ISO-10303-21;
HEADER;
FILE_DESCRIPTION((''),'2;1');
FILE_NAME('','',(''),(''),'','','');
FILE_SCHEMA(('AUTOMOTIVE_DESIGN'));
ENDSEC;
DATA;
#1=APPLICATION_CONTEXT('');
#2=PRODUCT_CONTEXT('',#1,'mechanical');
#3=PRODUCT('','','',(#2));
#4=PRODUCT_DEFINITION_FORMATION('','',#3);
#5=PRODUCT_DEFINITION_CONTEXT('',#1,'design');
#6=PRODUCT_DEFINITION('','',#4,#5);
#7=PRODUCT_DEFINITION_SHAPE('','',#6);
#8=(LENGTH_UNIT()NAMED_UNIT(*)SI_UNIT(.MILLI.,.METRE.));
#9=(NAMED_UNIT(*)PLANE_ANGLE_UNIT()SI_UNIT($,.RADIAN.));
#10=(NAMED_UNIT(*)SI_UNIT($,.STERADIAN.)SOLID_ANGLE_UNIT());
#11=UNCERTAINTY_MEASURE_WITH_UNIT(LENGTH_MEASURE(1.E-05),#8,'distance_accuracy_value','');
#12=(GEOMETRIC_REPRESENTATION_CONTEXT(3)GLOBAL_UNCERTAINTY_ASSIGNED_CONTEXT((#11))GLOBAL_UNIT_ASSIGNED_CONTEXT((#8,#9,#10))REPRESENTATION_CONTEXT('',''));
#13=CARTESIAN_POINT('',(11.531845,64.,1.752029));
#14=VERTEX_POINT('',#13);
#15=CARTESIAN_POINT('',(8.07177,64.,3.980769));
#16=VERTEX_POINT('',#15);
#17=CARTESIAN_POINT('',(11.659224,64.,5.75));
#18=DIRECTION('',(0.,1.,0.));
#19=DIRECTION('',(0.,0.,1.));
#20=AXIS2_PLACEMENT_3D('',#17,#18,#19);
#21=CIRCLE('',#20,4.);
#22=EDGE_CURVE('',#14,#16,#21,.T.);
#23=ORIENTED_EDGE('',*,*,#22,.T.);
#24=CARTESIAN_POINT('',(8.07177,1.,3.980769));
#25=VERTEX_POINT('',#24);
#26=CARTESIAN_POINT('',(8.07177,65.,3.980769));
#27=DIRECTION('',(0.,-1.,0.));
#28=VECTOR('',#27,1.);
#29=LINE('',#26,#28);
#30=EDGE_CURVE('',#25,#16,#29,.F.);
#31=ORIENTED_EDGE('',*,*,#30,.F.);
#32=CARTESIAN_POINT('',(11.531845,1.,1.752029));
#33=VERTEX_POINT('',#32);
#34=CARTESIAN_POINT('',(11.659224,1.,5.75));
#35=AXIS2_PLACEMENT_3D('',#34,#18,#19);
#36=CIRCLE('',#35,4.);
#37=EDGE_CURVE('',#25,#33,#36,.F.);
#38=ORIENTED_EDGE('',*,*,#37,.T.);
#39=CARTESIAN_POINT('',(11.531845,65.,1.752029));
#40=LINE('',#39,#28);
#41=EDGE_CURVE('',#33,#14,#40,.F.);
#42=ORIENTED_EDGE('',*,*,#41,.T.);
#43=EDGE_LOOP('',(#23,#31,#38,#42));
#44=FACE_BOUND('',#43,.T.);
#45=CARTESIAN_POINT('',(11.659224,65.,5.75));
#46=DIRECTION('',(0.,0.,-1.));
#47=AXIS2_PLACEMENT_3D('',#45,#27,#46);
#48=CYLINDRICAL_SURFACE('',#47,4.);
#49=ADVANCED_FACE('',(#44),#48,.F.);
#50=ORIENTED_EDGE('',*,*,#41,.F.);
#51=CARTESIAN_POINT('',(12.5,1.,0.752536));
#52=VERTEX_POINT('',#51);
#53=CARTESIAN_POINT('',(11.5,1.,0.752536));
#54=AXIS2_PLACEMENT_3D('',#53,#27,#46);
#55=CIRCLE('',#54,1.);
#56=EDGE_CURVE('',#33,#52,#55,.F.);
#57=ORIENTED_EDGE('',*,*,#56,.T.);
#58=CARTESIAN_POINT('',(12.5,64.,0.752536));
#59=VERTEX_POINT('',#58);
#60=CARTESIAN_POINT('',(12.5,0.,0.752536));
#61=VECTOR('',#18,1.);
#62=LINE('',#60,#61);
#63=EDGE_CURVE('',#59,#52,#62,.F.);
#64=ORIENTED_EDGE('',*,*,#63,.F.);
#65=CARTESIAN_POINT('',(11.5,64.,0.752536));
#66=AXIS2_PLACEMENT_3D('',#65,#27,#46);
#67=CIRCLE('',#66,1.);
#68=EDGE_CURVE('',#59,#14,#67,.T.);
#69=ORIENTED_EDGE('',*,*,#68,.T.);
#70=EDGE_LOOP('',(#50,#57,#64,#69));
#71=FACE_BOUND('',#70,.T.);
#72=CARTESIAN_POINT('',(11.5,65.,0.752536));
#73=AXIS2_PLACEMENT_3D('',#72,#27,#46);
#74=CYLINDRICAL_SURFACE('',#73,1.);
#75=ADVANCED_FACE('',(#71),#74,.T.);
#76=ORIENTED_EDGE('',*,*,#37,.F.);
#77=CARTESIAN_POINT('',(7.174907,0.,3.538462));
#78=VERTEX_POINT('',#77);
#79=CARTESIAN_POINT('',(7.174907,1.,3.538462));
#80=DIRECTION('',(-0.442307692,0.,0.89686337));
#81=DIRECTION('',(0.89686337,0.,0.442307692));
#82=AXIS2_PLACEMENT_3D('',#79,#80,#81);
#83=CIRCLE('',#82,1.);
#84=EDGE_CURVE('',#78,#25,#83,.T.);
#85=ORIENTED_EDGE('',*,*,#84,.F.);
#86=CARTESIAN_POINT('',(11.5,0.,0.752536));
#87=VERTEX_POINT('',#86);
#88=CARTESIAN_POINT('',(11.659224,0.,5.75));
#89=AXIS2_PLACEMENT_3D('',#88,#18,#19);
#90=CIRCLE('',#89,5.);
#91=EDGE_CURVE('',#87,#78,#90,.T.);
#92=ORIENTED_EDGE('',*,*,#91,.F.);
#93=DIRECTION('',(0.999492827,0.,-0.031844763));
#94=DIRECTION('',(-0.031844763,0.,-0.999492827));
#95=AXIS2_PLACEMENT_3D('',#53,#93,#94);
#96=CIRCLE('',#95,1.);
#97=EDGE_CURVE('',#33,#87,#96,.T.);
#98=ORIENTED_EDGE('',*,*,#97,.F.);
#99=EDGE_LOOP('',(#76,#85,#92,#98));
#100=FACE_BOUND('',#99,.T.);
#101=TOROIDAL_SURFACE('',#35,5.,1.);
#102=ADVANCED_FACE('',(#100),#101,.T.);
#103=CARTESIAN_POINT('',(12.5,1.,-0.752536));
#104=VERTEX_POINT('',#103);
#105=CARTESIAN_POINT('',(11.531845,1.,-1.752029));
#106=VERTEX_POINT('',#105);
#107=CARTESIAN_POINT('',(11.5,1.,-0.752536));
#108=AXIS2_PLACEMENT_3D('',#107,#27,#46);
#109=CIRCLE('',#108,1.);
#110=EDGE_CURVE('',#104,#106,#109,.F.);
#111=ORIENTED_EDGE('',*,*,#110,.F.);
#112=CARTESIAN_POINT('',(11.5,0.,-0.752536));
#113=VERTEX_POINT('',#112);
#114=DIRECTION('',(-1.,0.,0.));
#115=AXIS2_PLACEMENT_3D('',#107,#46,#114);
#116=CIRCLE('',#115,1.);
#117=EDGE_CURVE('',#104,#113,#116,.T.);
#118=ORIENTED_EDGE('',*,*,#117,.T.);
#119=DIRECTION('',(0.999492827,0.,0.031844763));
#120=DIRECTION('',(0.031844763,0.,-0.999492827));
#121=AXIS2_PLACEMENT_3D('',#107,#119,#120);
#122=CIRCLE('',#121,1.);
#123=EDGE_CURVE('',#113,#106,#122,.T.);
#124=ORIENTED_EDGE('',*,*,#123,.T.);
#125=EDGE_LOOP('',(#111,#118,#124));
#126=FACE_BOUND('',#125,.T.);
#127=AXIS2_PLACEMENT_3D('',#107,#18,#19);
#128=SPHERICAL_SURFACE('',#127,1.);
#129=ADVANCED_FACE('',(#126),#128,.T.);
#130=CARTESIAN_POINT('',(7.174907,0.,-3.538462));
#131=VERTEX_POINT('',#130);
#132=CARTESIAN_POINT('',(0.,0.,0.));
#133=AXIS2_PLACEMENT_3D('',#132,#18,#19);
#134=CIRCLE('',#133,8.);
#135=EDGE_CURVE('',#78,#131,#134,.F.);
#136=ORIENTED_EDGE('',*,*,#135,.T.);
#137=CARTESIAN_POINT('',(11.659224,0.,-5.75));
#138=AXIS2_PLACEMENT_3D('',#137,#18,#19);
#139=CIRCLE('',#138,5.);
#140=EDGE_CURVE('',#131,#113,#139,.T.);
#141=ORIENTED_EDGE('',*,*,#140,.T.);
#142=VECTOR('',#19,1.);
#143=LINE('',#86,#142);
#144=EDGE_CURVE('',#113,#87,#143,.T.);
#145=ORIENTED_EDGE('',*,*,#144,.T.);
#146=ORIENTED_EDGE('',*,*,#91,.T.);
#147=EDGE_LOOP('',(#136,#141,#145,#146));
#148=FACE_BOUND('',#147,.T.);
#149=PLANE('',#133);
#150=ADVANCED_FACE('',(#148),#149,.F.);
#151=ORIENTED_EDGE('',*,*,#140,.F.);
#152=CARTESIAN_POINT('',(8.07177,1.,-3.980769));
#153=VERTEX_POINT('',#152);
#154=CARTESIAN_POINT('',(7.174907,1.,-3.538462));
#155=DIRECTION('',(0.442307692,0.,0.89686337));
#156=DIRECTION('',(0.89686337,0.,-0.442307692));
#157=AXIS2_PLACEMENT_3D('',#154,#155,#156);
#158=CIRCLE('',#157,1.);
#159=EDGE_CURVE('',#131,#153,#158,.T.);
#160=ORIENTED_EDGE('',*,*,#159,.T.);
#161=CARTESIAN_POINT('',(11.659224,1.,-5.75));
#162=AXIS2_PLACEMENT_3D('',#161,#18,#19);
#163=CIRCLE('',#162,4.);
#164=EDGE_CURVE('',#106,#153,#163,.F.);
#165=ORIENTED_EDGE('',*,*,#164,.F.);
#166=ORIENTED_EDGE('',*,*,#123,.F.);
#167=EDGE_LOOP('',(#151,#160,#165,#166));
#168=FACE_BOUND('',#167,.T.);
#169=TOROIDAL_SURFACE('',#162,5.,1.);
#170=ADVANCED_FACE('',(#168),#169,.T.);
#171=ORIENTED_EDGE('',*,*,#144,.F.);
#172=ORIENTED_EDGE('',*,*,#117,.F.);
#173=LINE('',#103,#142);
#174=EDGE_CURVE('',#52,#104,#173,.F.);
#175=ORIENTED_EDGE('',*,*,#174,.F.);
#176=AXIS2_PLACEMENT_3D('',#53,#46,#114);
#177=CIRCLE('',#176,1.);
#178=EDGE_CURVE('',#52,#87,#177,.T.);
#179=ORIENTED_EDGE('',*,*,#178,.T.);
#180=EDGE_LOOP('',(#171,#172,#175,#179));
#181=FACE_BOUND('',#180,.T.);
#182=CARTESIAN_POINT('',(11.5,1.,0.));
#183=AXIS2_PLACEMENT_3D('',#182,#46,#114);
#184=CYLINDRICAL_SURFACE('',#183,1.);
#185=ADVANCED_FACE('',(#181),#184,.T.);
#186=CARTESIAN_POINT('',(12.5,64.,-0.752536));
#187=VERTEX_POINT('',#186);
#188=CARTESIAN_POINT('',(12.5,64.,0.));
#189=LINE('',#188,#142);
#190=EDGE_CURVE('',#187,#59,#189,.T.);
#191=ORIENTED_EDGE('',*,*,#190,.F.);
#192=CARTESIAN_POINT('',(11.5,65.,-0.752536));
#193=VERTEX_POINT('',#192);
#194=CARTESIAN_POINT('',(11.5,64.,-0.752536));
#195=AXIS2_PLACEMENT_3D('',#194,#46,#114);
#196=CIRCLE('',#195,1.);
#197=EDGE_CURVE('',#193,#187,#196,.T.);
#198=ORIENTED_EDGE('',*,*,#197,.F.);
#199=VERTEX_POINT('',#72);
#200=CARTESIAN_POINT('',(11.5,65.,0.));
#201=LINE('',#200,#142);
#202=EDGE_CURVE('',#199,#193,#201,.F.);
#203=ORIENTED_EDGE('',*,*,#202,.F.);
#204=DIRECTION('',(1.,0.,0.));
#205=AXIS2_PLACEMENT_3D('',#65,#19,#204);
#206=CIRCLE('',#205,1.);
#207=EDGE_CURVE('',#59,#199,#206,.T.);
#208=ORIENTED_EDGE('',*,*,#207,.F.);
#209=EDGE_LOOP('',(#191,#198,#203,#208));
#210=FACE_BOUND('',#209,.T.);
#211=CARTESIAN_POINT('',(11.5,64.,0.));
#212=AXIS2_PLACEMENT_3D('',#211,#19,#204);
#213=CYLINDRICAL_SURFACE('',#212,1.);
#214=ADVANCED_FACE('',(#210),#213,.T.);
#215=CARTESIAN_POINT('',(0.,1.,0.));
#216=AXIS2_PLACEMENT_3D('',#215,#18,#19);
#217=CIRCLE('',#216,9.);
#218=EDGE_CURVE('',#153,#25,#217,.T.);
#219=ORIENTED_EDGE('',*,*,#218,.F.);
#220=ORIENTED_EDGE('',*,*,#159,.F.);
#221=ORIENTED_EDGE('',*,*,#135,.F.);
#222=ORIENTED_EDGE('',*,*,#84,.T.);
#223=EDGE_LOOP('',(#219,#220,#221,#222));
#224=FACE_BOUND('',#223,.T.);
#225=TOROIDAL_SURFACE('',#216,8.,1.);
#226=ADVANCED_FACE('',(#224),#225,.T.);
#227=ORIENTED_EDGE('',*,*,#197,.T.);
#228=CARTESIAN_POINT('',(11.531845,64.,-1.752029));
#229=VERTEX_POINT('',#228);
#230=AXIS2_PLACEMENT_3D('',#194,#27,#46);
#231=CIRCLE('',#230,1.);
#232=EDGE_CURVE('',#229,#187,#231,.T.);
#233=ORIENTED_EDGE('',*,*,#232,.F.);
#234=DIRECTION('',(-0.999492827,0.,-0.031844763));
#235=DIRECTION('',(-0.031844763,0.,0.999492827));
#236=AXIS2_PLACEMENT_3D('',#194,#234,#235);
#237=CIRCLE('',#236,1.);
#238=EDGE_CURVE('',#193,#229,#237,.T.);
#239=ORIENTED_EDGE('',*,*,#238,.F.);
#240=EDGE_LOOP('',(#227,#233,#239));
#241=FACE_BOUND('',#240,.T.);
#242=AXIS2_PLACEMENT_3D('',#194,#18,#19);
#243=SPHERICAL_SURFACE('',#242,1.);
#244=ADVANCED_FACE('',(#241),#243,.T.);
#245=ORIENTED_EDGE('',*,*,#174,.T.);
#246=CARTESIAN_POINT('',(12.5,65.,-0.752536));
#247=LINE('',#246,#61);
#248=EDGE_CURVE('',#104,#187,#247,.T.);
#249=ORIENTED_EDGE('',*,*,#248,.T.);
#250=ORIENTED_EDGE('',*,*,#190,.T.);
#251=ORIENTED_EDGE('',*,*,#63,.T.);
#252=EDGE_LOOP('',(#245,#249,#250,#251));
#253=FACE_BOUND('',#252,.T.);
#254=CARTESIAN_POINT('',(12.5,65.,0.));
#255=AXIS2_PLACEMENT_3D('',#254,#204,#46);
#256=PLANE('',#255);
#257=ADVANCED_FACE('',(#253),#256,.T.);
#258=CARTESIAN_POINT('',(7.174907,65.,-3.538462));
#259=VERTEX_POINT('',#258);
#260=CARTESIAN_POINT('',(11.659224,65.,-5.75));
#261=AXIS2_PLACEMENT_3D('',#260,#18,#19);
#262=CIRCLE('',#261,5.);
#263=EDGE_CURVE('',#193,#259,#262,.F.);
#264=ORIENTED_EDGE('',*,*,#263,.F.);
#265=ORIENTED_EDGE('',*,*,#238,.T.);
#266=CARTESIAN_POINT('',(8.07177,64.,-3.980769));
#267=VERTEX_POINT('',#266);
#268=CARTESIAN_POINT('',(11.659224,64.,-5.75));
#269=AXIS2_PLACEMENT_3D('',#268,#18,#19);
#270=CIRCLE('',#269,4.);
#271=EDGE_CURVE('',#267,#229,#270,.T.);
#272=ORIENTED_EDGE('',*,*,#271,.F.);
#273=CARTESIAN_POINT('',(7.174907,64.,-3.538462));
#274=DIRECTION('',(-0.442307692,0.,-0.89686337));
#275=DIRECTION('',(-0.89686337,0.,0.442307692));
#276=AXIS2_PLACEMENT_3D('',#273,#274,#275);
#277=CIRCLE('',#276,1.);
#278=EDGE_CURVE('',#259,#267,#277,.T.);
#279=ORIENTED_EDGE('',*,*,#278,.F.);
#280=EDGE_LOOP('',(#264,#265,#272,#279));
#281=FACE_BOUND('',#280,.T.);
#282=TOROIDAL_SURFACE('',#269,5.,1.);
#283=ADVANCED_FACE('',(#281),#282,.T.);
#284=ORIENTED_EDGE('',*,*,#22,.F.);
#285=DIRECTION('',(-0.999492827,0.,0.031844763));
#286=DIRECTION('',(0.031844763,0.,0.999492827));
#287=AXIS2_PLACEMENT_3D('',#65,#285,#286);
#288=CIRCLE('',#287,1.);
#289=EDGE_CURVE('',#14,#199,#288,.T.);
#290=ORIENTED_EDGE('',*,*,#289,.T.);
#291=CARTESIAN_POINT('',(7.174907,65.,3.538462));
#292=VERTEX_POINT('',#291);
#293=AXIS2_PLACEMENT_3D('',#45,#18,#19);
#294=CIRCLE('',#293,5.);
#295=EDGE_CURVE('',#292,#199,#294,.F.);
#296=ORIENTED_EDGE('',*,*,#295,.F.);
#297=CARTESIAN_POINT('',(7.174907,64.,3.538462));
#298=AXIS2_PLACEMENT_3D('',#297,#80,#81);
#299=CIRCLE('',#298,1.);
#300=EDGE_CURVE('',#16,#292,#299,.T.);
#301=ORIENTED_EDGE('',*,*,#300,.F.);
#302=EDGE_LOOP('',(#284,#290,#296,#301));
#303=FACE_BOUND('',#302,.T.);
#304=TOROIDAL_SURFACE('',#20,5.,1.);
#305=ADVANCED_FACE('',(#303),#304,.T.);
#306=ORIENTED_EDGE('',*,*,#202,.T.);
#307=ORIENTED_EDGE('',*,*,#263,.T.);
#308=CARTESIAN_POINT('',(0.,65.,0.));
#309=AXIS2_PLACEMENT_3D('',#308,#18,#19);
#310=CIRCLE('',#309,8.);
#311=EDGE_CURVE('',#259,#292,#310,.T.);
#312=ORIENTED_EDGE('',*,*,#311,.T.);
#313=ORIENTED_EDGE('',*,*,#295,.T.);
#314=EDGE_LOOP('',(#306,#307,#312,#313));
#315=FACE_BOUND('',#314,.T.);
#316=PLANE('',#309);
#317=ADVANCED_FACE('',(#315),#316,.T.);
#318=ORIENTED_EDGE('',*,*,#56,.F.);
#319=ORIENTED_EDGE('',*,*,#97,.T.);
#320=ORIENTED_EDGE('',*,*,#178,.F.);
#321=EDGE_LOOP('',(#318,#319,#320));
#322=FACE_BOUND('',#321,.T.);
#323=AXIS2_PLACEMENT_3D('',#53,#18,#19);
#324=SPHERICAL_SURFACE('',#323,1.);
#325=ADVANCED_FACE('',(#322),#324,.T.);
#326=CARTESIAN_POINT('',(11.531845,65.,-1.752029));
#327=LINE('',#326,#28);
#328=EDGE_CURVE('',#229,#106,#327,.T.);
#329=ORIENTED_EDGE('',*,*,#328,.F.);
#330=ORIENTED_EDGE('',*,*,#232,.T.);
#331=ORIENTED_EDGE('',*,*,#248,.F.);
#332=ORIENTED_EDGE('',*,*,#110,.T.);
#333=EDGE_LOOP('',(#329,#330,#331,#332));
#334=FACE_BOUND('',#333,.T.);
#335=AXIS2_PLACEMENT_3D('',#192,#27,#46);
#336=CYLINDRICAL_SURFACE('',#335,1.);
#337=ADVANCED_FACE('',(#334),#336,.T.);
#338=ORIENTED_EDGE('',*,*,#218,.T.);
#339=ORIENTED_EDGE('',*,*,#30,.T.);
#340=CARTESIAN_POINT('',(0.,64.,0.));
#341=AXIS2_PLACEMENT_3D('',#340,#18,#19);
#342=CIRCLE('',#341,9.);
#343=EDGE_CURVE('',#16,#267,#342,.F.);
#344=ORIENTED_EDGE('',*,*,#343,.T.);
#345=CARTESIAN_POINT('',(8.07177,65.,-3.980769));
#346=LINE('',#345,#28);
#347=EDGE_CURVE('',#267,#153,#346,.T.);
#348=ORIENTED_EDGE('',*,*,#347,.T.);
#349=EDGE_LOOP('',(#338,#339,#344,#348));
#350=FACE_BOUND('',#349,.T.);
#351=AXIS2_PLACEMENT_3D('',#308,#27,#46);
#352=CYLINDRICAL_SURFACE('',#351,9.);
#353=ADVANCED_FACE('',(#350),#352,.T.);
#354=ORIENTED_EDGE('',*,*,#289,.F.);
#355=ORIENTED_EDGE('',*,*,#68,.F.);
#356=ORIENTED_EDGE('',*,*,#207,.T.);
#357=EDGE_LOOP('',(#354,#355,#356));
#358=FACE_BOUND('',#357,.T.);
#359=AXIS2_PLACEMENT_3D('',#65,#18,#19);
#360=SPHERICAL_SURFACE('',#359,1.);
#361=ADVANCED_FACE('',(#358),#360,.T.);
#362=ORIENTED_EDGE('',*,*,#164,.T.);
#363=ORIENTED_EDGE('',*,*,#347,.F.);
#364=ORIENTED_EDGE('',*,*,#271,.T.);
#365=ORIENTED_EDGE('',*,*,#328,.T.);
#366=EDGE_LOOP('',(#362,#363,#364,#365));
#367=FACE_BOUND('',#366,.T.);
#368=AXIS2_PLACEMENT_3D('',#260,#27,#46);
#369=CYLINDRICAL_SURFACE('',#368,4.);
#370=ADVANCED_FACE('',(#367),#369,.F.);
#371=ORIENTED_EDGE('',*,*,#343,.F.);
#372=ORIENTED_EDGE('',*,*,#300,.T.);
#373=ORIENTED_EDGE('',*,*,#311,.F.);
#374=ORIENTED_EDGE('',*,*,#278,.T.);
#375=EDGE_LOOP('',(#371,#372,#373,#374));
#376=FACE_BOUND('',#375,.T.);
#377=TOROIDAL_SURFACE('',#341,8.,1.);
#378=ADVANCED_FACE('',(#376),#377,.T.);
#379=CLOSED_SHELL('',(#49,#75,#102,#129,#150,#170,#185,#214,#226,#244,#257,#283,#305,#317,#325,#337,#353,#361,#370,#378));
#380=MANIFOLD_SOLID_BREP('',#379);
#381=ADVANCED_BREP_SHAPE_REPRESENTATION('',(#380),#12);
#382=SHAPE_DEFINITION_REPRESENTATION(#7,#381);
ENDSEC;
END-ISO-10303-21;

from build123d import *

# Parameters (mm, degrees)
EXTRUDE_1_DEPTH = 65
FILLET_1_R      = 4
FILLET_2_R      = 1
FILLET_3_R      = 1


with BuildPart() as part:
    # 草图1 → 凸台-拉伸1 (new body)
    with BuildSketch(Plane(origin=(0, 0, 0), x_dir=(1, 0, 0), z_dir=(0, 1, 0))):
        with BuildLine():
            Line((5.896241987, -1.75), (5.896241987, 1.75))
            Line((5.896241987, 1.75), (8.828221792, 1.75))
            ThreePointArc((8.828221792, 1.75), (-9, 0), (8.828221792, -1.75))
            Line((8.828221792, -1.75), (5.896241987, -1.75))
        make_face()
        with BuildLine():
            Line((8.828221792, 1.75), (5.896241987, 1.75))
            Line((5.896241987, 1.75), (5.896241987, -1.75))
            Line((5.896241987, -1.75), (8.828221792, -1.75))
            ThreePointArc((8.828221792, -1.75), (8.956952499, -0.879205288), (9, 0))
            ThreePointArc((9, 0), (8.956952499, 0.879205288), (8.828221792, 1.75))
        make_face()
        with BuildLine():
            Line((12.5, 1.75), (8.828221792, 1.75))
            ThreePointArc((8.828221792, 1.75), (8.956952499, 0.879205288), (9, 0))
            ThreePointArc((9, 0), (8.956952499, -0.879205288), (8.828221792, -1.75))
            Line((8.828221792, -1.75), (12.5, -1.75))
            Line((12.5, -1.75), (12.5, 1.75))
        make_face()
    extrude(amount=EXTRUDE_1_DEPTH)

    # 圆角1
    fillet_1_edges = [part.edges().sort_by_distance(p)[0] for p in [
        (8.828221792, 32.5, -1.75),
        (8.828221792, 32.5, 1.75),
    ]]
    fillet(fillet_1_edges, radius=FILLET_1_R)

    # 圆角2
    fillet_2_edges = [part.edges().sort_by_distance(p)[0] for p in [
        (12.5, 32.5, 1.75),
        (12.5, 32.5, -1.75),
    ]]
    fillet(fillet_2_edges, radius=FILLET_2_R)

    # 圆角3
    fillet_3_edges = [part.edges().sort_by_distance(p)[0] for p in [
        (-9, 0, 0),
        (-9, 65, 0),
        (9.493163732, 0, -2.387235704),
        (9.493163732, 65, 2.387235704),
        (12.5, 0, 0),
        (12.5, 65, 0),
        (9.493163732, 0, 2.387235704),
        (12.218277371, 0, -1.448292733),
        (12.218277371, 0, 1.448292733),
        (9.493163732, 65, -2.387235704),
        (12.218277371, 65, -1.448292733),
        (12.218277371, 65, 1.448292733),
    ]]
    fillet(fillet_3_edges, radius=FILLET_3_R - 0.0004)  # a hair under: the kernel refuses the full size


solid = part.part
